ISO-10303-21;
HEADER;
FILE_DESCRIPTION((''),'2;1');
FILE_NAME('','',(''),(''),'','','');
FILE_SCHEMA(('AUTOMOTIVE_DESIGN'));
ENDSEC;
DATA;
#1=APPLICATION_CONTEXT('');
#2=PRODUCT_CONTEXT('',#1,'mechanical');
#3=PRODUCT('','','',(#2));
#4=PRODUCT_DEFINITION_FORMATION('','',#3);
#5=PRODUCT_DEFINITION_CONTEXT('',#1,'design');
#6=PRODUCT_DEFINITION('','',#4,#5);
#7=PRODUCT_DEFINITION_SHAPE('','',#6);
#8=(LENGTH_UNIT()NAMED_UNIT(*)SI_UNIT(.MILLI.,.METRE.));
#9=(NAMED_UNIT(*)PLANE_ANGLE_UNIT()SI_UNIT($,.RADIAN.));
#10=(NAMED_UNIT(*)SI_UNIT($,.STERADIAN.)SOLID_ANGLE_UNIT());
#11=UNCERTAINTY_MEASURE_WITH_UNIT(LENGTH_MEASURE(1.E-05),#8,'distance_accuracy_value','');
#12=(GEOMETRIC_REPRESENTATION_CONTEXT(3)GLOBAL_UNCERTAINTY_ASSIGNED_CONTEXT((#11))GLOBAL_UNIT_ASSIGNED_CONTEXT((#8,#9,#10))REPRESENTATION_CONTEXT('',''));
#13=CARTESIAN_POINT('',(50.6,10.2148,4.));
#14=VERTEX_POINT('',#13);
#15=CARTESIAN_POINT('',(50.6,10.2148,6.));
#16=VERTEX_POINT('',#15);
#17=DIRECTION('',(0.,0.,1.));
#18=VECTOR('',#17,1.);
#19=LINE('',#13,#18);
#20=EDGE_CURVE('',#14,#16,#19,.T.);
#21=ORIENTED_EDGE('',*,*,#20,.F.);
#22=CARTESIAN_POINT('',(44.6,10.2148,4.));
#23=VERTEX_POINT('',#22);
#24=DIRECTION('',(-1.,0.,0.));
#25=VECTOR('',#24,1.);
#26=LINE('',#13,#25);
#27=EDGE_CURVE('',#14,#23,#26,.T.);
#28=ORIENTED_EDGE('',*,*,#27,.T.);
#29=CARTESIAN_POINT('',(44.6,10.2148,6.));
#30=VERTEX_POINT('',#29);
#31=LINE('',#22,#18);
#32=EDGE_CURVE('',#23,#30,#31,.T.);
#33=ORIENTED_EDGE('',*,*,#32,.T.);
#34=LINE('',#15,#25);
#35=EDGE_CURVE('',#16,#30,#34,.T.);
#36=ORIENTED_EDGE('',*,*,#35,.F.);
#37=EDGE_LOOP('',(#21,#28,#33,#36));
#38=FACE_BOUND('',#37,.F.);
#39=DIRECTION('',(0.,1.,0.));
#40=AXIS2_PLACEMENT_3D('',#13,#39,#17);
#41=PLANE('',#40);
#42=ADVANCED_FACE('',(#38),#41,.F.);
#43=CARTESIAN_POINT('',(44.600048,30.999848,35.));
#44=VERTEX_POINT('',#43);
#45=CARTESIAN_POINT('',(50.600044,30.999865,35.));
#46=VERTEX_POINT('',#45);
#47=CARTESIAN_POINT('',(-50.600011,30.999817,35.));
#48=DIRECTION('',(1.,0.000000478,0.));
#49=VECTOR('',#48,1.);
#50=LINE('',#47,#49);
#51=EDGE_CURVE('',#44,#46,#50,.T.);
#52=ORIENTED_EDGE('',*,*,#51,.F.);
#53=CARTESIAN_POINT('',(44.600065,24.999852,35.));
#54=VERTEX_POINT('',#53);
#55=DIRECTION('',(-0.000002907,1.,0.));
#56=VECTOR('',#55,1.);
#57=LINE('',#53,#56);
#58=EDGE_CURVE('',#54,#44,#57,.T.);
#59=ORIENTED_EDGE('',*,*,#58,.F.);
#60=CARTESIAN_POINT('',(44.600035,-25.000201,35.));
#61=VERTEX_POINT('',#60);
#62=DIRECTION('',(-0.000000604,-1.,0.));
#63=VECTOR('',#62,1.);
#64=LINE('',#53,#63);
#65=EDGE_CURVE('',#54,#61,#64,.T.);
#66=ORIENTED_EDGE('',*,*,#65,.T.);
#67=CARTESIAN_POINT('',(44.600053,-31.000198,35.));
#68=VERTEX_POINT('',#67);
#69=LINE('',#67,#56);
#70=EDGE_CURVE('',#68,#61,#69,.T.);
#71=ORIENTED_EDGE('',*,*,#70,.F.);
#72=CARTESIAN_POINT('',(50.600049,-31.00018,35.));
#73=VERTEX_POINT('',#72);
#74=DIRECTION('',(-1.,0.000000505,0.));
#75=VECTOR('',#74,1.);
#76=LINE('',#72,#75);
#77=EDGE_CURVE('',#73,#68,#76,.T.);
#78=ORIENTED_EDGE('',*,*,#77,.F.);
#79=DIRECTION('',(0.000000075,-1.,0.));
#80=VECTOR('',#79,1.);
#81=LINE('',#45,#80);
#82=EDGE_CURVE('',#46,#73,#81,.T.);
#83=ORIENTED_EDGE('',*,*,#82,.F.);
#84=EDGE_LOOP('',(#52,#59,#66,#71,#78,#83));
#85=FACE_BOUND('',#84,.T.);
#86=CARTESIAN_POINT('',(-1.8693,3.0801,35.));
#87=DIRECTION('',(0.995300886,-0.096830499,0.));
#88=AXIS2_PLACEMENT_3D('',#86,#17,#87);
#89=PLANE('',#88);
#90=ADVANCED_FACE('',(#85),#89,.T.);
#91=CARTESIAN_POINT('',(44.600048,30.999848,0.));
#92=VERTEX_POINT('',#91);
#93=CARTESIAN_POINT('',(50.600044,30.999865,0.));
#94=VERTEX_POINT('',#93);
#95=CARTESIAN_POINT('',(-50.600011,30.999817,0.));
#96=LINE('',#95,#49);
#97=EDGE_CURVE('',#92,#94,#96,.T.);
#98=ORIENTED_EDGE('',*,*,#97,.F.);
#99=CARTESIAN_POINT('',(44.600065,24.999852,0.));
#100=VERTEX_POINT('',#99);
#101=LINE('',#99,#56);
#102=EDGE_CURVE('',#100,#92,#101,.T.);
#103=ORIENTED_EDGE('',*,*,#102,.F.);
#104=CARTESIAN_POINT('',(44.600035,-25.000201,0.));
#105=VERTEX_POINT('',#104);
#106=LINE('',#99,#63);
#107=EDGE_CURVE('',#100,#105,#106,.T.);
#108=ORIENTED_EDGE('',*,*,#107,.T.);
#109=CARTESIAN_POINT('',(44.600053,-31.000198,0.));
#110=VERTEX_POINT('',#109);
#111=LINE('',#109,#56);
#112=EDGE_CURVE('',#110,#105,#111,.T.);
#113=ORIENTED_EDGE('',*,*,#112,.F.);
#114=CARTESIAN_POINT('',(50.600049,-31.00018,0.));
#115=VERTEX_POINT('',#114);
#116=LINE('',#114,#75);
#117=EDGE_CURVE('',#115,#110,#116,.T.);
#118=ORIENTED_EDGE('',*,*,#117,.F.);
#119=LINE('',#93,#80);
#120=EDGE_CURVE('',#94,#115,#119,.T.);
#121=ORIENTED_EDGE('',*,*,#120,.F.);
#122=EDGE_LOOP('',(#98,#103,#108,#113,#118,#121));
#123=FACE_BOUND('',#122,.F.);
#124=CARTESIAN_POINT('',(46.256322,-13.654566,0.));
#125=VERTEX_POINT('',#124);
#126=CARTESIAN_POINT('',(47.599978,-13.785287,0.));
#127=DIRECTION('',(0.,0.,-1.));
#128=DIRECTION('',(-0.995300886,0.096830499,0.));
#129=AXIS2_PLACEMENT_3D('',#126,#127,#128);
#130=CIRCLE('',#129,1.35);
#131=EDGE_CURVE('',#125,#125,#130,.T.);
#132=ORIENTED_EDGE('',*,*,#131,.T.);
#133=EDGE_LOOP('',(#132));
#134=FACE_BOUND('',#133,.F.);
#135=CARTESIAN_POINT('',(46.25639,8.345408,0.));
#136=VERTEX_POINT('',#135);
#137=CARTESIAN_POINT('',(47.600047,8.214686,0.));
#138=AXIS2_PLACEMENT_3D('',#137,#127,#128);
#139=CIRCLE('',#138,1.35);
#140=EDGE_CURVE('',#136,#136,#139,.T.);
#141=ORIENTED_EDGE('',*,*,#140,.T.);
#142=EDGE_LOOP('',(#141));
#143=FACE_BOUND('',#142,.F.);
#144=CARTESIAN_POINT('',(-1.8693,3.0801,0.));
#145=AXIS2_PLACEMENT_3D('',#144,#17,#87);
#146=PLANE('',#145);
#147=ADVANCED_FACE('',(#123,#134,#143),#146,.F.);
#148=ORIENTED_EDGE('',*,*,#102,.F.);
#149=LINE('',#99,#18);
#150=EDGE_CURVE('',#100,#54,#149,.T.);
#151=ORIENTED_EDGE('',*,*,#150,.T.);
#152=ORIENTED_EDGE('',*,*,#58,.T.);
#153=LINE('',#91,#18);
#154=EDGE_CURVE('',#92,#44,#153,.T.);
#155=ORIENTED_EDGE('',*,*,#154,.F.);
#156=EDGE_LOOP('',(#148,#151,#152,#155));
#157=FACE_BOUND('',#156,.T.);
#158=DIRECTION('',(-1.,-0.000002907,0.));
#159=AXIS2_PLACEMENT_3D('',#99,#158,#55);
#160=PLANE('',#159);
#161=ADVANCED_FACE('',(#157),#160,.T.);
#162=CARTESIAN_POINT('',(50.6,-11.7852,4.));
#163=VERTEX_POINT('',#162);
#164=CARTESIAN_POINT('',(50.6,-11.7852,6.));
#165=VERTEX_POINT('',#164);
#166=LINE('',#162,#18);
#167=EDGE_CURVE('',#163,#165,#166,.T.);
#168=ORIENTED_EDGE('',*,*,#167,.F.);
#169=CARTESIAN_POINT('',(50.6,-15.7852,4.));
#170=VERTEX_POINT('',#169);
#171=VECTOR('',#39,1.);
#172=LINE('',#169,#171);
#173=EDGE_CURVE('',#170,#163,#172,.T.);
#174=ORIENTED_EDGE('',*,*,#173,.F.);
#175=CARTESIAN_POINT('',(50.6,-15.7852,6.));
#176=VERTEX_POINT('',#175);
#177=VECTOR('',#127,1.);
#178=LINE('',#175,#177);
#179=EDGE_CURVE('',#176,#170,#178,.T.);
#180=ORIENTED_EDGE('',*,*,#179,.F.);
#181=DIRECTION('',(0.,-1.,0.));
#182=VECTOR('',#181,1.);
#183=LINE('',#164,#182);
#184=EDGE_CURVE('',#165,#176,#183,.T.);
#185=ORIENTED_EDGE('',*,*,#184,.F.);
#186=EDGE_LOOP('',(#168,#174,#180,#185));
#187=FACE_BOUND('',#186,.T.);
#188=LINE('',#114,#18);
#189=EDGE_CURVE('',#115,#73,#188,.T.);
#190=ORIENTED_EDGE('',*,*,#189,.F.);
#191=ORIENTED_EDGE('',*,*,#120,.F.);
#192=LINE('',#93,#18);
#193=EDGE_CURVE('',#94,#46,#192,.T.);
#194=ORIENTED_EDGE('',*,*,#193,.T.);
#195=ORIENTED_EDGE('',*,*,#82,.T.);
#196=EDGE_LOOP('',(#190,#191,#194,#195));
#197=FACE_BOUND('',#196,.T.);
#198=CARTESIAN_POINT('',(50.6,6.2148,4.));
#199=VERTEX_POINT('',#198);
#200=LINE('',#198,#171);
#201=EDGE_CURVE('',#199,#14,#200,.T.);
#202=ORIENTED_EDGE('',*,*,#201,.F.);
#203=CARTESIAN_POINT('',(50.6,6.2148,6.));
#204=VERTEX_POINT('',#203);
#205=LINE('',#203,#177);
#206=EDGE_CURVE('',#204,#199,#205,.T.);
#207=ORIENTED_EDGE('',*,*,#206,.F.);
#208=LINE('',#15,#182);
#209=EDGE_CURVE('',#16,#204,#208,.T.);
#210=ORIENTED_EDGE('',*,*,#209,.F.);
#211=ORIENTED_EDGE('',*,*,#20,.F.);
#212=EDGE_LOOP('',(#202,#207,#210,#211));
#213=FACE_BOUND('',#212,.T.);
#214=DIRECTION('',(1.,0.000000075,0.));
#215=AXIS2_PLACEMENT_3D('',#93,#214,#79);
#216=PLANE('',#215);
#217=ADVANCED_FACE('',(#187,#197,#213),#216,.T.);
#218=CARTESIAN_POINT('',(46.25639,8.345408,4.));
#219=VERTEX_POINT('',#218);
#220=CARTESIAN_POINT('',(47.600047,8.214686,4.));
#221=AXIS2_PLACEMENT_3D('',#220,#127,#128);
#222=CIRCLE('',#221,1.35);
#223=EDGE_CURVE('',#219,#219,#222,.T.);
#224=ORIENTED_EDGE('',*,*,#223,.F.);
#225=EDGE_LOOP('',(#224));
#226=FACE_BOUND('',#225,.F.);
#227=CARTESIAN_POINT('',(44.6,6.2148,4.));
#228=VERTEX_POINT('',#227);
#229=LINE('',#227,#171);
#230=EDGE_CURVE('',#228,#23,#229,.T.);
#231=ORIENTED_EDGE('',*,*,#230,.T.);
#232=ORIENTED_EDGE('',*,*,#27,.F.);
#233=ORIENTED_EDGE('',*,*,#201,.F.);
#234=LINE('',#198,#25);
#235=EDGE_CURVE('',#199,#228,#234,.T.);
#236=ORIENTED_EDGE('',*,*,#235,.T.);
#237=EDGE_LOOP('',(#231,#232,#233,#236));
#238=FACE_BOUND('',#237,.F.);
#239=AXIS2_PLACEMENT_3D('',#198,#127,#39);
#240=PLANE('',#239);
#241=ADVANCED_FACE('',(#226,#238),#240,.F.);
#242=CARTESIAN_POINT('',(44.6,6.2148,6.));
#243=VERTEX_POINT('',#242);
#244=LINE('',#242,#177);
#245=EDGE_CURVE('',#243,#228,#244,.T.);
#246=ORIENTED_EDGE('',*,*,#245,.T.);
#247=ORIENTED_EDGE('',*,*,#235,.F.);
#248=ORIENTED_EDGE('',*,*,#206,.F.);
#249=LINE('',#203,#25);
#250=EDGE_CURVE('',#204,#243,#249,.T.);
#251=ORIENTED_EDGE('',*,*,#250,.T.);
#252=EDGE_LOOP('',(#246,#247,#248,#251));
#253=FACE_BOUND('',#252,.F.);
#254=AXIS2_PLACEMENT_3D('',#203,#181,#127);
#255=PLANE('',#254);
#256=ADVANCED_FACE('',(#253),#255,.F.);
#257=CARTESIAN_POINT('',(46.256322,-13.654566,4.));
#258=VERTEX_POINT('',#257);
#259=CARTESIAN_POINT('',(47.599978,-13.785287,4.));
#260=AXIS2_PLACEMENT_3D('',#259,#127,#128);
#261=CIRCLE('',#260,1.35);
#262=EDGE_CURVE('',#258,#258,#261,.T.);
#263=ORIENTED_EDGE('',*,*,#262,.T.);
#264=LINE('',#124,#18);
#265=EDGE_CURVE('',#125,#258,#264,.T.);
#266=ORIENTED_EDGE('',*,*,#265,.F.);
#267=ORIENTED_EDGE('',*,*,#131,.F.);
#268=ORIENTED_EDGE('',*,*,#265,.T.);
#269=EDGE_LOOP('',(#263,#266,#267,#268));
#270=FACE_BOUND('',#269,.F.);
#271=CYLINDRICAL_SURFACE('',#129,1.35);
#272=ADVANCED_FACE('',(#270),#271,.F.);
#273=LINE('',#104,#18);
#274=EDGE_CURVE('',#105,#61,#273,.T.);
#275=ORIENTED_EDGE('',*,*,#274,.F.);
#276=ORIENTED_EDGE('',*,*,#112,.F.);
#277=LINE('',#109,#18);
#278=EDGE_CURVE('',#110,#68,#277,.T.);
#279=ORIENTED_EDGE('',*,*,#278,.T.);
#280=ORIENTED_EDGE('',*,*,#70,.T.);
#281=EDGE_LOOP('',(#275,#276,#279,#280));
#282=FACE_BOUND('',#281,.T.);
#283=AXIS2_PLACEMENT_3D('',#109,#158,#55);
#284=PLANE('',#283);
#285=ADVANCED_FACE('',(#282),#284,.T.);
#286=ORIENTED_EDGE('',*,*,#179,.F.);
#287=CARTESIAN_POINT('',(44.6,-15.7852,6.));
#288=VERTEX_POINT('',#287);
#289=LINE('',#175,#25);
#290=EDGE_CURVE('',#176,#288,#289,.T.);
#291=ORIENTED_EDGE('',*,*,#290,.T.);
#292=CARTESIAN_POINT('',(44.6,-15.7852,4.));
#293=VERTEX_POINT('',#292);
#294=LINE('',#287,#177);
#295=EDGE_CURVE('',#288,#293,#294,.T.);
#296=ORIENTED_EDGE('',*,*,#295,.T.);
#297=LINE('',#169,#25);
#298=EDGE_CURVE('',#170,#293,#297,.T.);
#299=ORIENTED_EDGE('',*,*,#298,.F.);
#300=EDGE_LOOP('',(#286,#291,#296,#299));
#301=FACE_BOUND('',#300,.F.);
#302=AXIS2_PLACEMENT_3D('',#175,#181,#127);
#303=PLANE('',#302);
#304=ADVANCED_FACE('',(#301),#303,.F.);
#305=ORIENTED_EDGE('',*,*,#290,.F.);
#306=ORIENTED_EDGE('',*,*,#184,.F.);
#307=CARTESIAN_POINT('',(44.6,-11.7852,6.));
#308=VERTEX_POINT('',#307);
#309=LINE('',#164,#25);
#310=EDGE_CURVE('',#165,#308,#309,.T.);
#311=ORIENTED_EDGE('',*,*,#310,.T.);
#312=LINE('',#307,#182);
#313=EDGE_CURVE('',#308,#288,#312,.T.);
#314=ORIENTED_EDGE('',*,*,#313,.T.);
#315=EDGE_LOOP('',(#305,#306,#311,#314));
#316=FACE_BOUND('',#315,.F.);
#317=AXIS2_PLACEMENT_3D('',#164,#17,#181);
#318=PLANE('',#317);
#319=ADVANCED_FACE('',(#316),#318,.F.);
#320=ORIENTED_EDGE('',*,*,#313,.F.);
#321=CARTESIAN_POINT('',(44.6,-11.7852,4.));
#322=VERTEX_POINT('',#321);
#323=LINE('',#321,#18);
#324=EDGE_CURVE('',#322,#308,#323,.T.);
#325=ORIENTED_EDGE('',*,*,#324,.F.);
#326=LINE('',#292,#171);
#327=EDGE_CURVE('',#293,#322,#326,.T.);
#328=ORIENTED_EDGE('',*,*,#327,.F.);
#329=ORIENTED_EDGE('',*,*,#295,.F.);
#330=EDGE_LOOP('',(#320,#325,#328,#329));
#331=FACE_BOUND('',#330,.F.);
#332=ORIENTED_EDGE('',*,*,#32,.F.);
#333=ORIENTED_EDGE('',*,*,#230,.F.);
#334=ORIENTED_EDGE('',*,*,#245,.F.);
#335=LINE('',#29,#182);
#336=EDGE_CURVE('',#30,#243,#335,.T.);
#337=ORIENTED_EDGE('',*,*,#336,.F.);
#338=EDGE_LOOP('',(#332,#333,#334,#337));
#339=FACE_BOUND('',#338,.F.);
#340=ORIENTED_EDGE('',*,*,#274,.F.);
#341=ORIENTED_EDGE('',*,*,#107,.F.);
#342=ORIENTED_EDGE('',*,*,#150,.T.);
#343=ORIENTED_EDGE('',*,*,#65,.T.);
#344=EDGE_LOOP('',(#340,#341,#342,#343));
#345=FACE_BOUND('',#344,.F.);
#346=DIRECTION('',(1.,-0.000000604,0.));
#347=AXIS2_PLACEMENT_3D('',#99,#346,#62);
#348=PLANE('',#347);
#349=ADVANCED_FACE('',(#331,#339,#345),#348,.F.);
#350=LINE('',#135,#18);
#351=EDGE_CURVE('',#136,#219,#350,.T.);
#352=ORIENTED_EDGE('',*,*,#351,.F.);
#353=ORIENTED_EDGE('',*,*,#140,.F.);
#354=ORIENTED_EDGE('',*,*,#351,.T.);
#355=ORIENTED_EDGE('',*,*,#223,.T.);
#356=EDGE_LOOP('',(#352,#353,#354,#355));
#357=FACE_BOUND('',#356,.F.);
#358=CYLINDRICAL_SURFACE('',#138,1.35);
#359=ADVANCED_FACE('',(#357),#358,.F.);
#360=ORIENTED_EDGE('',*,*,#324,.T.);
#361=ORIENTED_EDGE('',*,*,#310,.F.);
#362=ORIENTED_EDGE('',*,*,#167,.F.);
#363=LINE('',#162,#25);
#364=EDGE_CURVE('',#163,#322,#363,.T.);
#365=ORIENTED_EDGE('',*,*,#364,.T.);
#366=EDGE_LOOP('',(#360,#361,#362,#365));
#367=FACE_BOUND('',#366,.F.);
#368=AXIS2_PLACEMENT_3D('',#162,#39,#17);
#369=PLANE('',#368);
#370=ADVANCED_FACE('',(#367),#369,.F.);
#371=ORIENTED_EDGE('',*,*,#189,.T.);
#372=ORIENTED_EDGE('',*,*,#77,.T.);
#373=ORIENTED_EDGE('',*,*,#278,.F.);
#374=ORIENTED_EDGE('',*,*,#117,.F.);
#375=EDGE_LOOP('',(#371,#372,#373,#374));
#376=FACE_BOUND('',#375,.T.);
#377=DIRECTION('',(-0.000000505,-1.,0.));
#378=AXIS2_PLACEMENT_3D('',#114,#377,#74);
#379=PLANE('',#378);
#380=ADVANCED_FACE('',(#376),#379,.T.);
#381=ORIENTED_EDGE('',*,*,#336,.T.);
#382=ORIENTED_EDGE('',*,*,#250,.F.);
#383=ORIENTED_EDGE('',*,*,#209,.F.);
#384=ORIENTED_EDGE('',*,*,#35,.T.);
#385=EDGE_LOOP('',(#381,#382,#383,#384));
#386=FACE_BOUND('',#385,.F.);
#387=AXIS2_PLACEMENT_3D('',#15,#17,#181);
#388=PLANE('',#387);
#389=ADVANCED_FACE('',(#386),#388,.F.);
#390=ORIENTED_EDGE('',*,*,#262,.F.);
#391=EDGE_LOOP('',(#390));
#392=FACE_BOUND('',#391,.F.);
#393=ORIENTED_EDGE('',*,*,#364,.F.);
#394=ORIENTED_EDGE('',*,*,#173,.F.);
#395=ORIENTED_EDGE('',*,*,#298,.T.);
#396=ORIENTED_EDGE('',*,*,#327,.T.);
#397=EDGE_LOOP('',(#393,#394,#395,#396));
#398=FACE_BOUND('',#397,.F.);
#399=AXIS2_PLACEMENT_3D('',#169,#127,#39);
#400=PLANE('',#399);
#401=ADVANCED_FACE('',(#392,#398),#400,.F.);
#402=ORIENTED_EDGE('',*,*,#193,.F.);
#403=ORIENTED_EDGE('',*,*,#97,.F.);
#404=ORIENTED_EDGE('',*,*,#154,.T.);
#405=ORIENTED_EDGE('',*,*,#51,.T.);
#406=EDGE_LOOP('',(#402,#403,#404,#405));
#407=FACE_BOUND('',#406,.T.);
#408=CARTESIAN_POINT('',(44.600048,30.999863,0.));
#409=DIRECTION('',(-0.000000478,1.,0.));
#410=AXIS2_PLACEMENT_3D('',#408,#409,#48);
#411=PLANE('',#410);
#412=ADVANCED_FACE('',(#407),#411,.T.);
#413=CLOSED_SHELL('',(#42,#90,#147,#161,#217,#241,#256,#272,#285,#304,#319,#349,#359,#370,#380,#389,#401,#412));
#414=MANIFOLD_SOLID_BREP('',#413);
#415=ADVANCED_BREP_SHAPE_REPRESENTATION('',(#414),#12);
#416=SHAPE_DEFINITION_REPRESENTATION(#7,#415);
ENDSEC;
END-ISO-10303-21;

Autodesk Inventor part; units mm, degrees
ref_plane "YZ Plane" through (0, 0, 0) normal (1, 0, 0) x (0, 1, 0)
ref_plane "XZ Plane" through (0, 0, 0) normal (0, 1, 0) x (-1, 0, 0)
ref_plane "XY Plane" through (0, 0, 0) normal (0, 0, 1) x (1, 0, 0)
ref_plane "작업 평면2" through (-1.8693, 3.0801, 0) normal (0, 0, 1) x (0.9953009, -0.0968305, 0)
sketch "스케치1" plane through (-1.8693, 3.0801, 0) normal (0, 0, 1) x (0.9953009, -0.0968305, 0)
  line L0 (44.1285, 26.3164) -> (48.97, -23.4487) projected
  line L1 (49.551, -29.4205) -> (48.97, -23.4487) projected
  line L2 (55.5228, -28.8395) -> (-45.2017, -38.6387) projected
  line L3 (49.5193, 32.8692) -> (55.5228, -28.8395) projected
  line L4 (-51.2052, 23.0699) -> (49.5193, 32.8692) projected
  line L5 (44.1285, 26.3164) -> (43.5475, 32.2882) projected
  point P0 (2.1588, -2.8846)
extrude "돌출1" add sketch "스케치1" along normal blind 35
sketch "스케치2" plane through (-1.8693, 3.0801, 0) normal (0, 0, -1) x (-0.9953009, 0.0968305, 0)
  circle A0 centre (-48.7397, 9.9006) radius 1.35 projected
  circle A1 centre (-50.8699, -11.996) radius 1.35 projected
  point P0 (-2.1588, -2.8846)
extrude "돌출2" cut sketch "스케치2" against normal blind 5
ref_plane "작업 평면3" through (50.6, -31.0001, 0) normal (1, 0, 0) x (0, 0, -1)
sketch "스케치3" plane through (50.6, -31.0001, 0) normal (1, 0, 0) x (0, 0, -1)
  line L0 (-5, 40.5649) -> (-5, 37.8649) projected
  line L1 (-5, 18.5649) -> (-5, 15.8649) projected
  line L2 (-4, 0) -> (-4, 6) projected
  line L3 (-4, 1.65) -> (0, 1.65)
  line L4 (-4, 4.35) -> (0, 4.35)
  line L5 (-4, 37.2149) -> (-4, 41.2149)
  line L6 (-4, 41.2149) -> (-6, 41.2149)
  line L7 (-6, 41.2149) -> (-6, 37.2149)
  line L8 (-6, 37.2149) -> (-4, 37.2149)
  line L9 (-4, 37.2149) -> (-6, 41.2149) construction
  line L10 (-4, 41.2149) -> (-6, 37.2149) construction
  line L11 (-4, 15.2149) -> (-4, 19.2149)
  line L12 (-4, 19.2149) -> (-6, 19.2149)
  line L13 (-6, 19.2149) -> (-6, 15.2149)
  line L14 (-6, 15.2149) -> (-4, 15.2149)
  line L15 (-4, 15.2149) -> (-6, 19.2149) construction
  line L16 (-4, 19.2149) -> (-6, 15.2149) construction
  point P0 (0, 31.0001)
  point P1 (-5, 39.2149)
  point P2 (-5, 17.2149)
  dimension "d4" = 4
  dimension "d5" = 2
  dimension "d6" = 4
extrude "돌출3" cut sketch "스케치3" against normal up to surface (6 mm away)
properties part number "_head_adt_2" material "PMMA 플라스틱"
